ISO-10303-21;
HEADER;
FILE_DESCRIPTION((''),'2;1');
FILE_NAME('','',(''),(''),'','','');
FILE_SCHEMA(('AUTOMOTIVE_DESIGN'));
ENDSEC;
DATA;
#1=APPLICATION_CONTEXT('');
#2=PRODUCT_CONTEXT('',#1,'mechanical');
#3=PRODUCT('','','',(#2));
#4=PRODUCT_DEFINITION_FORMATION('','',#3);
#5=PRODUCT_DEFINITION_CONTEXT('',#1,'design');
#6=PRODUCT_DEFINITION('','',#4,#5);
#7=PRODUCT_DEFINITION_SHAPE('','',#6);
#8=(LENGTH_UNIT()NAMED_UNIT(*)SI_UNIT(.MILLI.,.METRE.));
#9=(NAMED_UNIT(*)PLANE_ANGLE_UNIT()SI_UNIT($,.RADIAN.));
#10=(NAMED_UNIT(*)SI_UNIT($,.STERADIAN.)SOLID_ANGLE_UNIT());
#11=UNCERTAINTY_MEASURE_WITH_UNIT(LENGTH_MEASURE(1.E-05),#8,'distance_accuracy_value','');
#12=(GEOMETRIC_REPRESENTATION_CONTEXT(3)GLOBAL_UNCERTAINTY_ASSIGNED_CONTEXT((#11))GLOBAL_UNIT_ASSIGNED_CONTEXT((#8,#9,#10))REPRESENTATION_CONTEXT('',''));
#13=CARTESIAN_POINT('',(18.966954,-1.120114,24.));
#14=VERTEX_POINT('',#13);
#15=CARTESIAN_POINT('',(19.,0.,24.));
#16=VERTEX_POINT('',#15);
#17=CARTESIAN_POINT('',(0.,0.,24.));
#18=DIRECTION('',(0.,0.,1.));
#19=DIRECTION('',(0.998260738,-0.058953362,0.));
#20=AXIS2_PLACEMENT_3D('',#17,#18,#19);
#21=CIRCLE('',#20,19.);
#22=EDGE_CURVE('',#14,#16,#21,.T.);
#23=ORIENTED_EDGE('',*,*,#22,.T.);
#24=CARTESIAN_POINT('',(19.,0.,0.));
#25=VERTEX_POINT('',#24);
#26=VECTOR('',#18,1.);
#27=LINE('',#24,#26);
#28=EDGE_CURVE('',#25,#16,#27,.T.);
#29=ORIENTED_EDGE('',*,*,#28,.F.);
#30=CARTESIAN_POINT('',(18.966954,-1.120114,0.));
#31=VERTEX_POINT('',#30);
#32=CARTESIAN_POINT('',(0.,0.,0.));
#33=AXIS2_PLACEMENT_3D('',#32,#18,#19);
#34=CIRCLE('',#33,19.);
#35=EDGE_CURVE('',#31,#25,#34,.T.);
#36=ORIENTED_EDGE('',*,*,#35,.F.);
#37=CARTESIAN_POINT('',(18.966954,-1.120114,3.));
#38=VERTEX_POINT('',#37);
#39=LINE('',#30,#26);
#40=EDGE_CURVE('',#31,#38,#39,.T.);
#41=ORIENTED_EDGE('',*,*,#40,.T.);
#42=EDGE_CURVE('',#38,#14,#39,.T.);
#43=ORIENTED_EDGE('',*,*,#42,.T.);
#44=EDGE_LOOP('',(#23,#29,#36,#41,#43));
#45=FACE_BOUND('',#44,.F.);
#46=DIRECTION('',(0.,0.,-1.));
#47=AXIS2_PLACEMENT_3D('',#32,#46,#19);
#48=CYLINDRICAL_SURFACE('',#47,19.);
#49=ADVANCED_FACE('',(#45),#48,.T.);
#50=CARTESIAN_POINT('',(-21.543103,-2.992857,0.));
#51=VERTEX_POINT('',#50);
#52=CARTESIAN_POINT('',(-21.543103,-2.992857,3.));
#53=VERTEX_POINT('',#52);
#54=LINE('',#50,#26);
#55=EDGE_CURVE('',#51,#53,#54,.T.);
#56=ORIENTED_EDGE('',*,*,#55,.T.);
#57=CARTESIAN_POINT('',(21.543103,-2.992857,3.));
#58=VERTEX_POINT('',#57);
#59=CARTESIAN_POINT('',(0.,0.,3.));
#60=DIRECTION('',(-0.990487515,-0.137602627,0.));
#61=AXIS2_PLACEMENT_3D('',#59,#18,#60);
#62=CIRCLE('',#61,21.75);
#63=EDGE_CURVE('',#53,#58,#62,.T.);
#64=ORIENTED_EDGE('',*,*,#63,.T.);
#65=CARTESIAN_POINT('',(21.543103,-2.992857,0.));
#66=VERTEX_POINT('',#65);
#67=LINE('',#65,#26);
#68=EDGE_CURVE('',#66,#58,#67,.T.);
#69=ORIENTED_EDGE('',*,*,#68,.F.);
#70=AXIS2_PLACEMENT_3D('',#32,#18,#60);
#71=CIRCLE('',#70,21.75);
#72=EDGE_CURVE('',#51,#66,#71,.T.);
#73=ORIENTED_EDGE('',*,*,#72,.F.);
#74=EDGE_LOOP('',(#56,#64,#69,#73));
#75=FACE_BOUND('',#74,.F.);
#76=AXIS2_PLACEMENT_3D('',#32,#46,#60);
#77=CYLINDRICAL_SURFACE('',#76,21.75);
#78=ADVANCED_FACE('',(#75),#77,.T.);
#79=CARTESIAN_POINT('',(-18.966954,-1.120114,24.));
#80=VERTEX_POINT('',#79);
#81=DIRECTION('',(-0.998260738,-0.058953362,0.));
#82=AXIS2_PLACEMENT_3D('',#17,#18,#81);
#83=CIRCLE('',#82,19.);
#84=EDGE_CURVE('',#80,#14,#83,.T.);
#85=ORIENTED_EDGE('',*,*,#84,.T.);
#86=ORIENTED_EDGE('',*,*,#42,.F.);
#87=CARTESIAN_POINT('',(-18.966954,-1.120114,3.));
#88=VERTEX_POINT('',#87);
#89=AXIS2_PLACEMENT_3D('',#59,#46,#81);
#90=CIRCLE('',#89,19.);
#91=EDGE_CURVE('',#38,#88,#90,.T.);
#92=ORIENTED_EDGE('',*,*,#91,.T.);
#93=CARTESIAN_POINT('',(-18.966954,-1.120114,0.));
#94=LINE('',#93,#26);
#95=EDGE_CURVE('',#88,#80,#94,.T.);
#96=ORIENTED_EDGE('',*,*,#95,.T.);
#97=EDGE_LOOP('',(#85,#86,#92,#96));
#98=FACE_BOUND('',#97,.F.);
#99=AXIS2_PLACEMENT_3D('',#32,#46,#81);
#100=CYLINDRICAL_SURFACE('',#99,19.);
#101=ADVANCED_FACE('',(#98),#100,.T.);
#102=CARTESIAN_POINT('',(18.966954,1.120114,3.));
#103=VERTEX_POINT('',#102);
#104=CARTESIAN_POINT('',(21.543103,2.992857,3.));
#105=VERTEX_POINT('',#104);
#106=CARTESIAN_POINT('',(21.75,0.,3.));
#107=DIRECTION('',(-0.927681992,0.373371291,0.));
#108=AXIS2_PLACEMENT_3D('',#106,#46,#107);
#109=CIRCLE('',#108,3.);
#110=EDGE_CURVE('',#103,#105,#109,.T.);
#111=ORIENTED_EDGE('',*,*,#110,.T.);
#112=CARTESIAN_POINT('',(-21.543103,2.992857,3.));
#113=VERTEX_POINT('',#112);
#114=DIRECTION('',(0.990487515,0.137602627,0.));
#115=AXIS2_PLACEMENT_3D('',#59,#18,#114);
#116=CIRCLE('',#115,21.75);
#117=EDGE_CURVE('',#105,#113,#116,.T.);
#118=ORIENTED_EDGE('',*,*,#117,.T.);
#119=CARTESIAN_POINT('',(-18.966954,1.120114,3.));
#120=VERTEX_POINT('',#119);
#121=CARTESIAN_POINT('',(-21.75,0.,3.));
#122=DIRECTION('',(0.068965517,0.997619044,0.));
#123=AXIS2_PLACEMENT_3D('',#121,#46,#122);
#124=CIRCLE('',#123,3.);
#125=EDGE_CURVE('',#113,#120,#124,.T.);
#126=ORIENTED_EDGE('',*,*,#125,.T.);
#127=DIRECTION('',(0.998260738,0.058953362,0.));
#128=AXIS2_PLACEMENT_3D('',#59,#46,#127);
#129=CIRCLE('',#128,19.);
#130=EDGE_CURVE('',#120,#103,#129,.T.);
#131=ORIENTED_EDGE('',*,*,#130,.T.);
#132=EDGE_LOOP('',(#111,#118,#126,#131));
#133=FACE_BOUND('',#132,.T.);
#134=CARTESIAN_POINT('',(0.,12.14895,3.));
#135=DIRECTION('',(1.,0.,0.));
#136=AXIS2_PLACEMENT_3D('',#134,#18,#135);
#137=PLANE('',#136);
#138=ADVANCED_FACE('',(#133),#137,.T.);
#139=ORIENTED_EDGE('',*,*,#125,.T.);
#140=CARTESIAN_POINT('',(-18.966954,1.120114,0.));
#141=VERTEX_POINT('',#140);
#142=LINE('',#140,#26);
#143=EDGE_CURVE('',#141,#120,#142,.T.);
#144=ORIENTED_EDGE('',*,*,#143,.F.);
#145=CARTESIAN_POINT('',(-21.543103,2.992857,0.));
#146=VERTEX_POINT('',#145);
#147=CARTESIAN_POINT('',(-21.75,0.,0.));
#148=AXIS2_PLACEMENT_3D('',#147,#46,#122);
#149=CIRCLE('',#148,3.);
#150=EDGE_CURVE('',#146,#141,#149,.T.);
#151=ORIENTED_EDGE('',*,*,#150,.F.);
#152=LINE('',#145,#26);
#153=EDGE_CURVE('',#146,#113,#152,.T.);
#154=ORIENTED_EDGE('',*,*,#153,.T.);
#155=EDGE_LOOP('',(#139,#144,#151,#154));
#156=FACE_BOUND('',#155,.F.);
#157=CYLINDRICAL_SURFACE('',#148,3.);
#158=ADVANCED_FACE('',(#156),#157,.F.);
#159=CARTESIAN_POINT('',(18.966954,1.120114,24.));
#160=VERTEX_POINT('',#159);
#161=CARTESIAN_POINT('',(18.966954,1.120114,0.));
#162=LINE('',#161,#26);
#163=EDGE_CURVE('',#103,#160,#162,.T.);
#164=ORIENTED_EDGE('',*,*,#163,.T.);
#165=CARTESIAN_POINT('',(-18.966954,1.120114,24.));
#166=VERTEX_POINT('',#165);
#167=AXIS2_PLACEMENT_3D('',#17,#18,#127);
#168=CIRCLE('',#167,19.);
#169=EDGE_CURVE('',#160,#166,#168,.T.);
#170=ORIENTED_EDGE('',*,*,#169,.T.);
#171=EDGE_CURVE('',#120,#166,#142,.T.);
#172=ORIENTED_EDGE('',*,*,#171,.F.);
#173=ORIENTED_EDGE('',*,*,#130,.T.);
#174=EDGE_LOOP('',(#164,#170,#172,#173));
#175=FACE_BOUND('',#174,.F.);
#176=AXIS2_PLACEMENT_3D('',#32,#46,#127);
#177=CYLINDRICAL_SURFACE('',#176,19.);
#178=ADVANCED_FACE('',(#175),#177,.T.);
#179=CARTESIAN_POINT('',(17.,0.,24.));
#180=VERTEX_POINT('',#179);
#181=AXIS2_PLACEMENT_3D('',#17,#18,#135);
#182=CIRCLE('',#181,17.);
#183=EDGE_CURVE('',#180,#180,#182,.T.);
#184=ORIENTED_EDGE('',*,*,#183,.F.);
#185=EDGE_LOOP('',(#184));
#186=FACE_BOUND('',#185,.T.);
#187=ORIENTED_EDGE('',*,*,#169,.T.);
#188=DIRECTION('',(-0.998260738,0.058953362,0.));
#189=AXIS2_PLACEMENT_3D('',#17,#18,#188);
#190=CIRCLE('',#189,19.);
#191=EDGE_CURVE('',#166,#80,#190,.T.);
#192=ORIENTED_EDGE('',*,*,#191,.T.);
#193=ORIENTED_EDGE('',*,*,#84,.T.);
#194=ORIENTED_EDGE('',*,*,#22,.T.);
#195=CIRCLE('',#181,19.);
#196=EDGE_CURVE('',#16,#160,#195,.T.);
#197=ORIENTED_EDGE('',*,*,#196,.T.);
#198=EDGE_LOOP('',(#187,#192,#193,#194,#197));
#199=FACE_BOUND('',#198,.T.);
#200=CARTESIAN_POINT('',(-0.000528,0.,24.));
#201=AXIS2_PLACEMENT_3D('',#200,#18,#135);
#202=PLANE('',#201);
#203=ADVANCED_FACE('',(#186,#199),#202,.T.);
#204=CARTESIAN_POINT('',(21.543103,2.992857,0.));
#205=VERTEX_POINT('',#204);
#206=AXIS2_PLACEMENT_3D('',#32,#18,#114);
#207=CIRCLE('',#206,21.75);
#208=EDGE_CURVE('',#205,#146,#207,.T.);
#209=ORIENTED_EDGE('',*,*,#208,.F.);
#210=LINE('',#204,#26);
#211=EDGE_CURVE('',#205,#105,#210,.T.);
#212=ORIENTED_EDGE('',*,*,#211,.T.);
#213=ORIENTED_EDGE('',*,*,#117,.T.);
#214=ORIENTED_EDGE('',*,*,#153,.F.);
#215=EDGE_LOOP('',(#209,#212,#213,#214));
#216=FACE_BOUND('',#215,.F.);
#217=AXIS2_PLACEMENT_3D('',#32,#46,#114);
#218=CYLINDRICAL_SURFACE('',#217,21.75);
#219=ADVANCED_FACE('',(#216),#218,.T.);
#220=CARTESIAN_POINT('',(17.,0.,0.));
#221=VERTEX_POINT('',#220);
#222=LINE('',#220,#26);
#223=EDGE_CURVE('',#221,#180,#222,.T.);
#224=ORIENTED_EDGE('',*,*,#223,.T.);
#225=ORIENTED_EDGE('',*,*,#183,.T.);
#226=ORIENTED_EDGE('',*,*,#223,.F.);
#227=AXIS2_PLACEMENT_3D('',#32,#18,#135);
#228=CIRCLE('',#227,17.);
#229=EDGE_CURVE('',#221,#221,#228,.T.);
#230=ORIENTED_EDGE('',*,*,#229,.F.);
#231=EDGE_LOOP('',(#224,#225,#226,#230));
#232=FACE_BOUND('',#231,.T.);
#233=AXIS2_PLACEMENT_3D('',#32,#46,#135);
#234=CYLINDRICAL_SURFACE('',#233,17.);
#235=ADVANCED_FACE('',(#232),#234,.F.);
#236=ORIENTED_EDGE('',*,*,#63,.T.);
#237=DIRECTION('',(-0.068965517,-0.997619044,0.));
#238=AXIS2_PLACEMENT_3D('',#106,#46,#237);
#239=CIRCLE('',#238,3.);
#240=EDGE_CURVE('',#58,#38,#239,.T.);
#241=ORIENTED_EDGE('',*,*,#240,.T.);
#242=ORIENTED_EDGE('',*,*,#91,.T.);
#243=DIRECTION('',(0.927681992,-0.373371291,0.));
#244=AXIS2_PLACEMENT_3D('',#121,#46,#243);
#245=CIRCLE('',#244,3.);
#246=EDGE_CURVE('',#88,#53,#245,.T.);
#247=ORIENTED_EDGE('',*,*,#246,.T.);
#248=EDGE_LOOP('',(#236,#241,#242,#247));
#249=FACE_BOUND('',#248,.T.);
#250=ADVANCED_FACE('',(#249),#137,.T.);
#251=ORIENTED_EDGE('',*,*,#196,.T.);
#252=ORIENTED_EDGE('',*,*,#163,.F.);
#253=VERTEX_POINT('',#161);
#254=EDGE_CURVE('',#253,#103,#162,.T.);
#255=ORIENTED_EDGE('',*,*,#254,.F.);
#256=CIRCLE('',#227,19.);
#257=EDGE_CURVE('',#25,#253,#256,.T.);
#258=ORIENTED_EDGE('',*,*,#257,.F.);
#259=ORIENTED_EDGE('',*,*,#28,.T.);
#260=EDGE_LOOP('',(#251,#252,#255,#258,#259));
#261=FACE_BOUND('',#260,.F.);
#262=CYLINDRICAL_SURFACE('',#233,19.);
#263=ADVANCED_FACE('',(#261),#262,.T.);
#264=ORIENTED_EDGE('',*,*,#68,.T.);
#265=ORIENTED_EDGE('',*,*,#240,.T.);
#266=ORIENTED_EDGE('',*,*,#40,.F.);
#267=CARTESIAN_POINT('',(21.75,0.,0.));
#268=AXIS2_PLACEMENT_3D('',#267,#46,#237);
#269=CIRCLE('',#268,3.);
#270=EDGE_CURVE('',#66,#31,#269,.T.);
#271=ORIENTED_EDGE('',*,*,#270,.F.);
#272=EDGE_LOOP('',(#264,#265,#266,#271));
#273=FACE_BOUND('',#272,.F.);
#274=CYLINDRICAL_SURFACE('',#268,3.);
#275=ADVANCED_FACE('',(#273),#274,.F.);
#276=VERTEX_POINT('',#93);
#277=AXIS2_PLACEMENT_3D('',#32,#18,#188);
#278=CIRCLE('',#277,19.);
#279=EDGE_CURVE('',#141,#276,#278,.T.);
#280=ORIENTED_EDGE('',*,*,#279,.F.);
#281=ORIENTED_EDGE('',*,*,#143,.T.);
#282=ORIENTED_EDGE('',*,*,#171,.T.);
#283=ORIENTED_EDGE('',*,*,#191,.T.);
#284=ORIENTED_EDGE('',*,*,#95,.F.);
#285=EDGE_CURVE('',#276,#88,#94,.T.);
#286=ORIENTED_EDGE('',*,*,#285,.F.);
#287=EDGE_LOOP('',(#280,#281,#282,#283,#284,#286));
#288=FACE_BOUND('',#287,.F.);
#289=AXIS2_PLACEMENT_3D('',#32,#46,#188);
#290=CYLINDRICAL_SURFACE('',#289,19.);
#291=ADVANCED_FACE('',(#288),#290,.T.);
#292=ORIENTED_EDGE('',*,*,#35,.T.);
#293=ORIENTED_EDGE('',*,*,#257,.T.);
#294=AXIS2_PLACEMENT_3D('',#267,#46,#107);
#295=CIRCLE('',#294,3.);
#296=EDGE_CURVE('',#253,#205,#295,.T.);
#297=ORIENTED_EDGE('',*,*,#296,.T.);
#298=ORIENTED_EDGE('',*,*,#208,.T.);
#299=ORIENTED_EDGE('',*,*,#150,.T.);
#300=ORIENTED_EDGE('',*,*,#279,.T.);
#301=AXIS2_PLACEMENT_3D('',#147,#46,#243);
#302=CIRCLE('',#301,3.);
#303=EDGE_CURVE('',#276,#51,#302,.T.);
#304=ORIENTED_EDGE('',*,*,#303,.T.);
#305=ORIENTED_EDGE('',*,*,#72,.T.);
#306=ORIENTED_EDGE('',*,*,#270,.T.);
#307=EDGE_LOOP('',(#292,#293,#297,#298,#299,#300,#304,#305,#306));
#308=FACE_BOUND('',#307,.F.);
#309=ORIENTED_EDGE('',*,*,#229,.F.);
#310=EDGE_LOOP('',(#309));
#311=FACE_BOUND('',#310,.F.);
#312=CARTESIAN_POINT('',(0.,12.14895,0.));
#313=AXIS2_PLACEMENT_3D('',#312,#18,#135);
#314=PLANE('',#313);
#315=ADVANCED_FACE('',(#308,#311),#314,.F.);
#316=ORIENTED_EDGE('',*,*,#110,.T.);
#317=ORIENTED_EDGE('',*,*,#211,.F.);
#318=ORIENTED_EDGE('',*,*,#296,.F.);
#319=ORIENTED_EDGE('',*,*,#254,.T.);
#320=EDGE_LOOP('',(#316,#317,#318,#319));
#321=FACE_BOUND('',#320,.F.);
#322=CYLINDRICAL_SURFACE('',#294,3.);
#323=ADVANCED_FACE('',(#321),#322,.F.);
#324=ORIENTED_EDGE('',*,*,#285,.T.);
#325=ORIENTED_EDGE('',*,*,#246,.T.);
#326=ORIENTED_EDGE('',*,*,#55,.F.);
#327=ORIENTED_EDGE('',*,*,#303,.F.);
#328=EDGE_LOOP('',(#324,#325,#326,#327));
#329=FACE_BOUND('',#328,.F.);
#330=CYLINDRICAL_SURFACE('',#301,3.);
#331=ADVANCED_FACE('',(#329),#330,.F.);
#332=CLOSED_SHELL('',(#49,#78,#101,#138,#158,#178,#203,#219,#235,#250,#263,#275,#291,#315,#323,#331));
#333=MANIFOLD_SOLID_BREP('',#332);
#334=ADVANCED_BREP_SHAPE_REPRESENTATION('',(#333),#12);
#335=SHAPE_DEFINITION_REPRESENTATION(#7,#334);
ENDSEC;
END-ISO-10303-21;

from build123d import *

# Parameters (mm, degrees)
F0_R     = 17
F1_DEPTH = 3
F2_DEPTH = 24


with BuildPart() as f1:
    # F0 (on Top) → F1 (new body)
    with BuildSketch(Plane.XY):
        with BuildLine():
            ThreePointArc((18.966954023, 1.1201138736), (19.9859901049, 2.4265755892), (21.5431034483, 2.9928571327))
            ThreePointArc((21.5431034483, 2.9928571327), (0, 21.75), (-21.5431034483, 2.9928571327))
            ThreePointArc((-21.5431034483, 2.9928571327), (-19.9859901049, 2.4265755892), (-18.966954023, 1.1201138736))
            ThreePointArc((-18.966954023, 1.1201138736), (0, 19), (18.966954023, 1.1201138736))
        make_face()
        with BuildLine():
            ThreePointArc((-21.5431034483, -2.9928571327), (0, -21.75), (21.5431034483, -2.9928571327))
            ThreePointArc((21.5431034483, -2.9928571327), (19.9859901049, -2.4265755892), (18.966954023, -1.1201138736))
            ThreePointArc((18.966954023, -1.1201138736), (0, -19), (-18.966954023, -1.1201138736))
            ThreePointArc((-18.966954023, -1.1201138736), (-19.9859901049, -2.4265755892), (-21.5431034483, -2.9928571327))
        make_face()
        with BuildLine():
            ThreePointArc((18.966954023, -1.1201138736), (18.75, 0), (18.966954023, 1.1201138736))
            ThreePointArc((18.966954023, 1.1201138736), (0, 19), (-18.966954023, 1.1201138736))
            ThreePointArc((-18.966954023, 1.1201138736), (-18.8047378783, 0.5704656295), (-18.75, 0))
            ThreePointArc((-18.75, 0), (-18.8047378783, -0.5704656295), (-18.966954023, -1.1201138736))
            ThreePointArc((-18.966954023, -1.1201138736), (0, -19), (18.966954023, -1.1201138736))
        make_face()
        Circle(F0_R, mode=Mode.SUBTRACT)
    extrude(amount=F1_DEPTH)

    # F0 (on Top) → F2 (join)
    with BuildSketch(Plane.XY):
        with BuildLine():
            ThreePointArc((18.966954023, -1.1201138736), (18.75, 0), (18.966954023, 1.1201138736))
            ThreePointArc((18.966954023, 1.1201138736), (0, 19), (-18.966954023, 1.1201138736))
            ThreePointArc((-18.966954023, 1.1201138736), (-18.8047378783, 0.5704656295), (-18.75, 0))
            ThreePointArc((-18.75, 0), (-18.8047378783, -0.5704656295), (-18.966954023, -1.1201138736))
            ThreePointArc((-18.966954023, -1.1201138736), (0, -19), (18.966954023, -1.1201138736))
        make_face()
        Circle(F0_R, mode=Mode.SUBTRACT)
        with BuildLine():
            ThreePointArc((-18.75, 0), (-18.8047378783, 0.5704656295), (-18.966954023, 1.1201138736))
            ThreePointArc((-18.966954023, 1.1201138736), (-19, 0), (-18.966954023, -1.1201138736))
            ThreePointArc((-18.966954023, -1.1201138736), (-18.8047378783, -0.5704656295), (-18.75, 0))
        make_face()
        with BuildLine():
            ThreePointArc((19, 0), (18.9917367089, 0.5603006172), (18.966954023, 1.1201138736))
            ThreePointArc((18.966954023, 1.1201138736), (18.75, 0), (18.966954023, -1.1201138736))
            ThreePointArc((18.966954023, -1.1201138736), (18.9917367089, -0.5603006172), (19, 0))
        make_face()
    extrude(amount=F2_DEPTH)


solid = f1.part
